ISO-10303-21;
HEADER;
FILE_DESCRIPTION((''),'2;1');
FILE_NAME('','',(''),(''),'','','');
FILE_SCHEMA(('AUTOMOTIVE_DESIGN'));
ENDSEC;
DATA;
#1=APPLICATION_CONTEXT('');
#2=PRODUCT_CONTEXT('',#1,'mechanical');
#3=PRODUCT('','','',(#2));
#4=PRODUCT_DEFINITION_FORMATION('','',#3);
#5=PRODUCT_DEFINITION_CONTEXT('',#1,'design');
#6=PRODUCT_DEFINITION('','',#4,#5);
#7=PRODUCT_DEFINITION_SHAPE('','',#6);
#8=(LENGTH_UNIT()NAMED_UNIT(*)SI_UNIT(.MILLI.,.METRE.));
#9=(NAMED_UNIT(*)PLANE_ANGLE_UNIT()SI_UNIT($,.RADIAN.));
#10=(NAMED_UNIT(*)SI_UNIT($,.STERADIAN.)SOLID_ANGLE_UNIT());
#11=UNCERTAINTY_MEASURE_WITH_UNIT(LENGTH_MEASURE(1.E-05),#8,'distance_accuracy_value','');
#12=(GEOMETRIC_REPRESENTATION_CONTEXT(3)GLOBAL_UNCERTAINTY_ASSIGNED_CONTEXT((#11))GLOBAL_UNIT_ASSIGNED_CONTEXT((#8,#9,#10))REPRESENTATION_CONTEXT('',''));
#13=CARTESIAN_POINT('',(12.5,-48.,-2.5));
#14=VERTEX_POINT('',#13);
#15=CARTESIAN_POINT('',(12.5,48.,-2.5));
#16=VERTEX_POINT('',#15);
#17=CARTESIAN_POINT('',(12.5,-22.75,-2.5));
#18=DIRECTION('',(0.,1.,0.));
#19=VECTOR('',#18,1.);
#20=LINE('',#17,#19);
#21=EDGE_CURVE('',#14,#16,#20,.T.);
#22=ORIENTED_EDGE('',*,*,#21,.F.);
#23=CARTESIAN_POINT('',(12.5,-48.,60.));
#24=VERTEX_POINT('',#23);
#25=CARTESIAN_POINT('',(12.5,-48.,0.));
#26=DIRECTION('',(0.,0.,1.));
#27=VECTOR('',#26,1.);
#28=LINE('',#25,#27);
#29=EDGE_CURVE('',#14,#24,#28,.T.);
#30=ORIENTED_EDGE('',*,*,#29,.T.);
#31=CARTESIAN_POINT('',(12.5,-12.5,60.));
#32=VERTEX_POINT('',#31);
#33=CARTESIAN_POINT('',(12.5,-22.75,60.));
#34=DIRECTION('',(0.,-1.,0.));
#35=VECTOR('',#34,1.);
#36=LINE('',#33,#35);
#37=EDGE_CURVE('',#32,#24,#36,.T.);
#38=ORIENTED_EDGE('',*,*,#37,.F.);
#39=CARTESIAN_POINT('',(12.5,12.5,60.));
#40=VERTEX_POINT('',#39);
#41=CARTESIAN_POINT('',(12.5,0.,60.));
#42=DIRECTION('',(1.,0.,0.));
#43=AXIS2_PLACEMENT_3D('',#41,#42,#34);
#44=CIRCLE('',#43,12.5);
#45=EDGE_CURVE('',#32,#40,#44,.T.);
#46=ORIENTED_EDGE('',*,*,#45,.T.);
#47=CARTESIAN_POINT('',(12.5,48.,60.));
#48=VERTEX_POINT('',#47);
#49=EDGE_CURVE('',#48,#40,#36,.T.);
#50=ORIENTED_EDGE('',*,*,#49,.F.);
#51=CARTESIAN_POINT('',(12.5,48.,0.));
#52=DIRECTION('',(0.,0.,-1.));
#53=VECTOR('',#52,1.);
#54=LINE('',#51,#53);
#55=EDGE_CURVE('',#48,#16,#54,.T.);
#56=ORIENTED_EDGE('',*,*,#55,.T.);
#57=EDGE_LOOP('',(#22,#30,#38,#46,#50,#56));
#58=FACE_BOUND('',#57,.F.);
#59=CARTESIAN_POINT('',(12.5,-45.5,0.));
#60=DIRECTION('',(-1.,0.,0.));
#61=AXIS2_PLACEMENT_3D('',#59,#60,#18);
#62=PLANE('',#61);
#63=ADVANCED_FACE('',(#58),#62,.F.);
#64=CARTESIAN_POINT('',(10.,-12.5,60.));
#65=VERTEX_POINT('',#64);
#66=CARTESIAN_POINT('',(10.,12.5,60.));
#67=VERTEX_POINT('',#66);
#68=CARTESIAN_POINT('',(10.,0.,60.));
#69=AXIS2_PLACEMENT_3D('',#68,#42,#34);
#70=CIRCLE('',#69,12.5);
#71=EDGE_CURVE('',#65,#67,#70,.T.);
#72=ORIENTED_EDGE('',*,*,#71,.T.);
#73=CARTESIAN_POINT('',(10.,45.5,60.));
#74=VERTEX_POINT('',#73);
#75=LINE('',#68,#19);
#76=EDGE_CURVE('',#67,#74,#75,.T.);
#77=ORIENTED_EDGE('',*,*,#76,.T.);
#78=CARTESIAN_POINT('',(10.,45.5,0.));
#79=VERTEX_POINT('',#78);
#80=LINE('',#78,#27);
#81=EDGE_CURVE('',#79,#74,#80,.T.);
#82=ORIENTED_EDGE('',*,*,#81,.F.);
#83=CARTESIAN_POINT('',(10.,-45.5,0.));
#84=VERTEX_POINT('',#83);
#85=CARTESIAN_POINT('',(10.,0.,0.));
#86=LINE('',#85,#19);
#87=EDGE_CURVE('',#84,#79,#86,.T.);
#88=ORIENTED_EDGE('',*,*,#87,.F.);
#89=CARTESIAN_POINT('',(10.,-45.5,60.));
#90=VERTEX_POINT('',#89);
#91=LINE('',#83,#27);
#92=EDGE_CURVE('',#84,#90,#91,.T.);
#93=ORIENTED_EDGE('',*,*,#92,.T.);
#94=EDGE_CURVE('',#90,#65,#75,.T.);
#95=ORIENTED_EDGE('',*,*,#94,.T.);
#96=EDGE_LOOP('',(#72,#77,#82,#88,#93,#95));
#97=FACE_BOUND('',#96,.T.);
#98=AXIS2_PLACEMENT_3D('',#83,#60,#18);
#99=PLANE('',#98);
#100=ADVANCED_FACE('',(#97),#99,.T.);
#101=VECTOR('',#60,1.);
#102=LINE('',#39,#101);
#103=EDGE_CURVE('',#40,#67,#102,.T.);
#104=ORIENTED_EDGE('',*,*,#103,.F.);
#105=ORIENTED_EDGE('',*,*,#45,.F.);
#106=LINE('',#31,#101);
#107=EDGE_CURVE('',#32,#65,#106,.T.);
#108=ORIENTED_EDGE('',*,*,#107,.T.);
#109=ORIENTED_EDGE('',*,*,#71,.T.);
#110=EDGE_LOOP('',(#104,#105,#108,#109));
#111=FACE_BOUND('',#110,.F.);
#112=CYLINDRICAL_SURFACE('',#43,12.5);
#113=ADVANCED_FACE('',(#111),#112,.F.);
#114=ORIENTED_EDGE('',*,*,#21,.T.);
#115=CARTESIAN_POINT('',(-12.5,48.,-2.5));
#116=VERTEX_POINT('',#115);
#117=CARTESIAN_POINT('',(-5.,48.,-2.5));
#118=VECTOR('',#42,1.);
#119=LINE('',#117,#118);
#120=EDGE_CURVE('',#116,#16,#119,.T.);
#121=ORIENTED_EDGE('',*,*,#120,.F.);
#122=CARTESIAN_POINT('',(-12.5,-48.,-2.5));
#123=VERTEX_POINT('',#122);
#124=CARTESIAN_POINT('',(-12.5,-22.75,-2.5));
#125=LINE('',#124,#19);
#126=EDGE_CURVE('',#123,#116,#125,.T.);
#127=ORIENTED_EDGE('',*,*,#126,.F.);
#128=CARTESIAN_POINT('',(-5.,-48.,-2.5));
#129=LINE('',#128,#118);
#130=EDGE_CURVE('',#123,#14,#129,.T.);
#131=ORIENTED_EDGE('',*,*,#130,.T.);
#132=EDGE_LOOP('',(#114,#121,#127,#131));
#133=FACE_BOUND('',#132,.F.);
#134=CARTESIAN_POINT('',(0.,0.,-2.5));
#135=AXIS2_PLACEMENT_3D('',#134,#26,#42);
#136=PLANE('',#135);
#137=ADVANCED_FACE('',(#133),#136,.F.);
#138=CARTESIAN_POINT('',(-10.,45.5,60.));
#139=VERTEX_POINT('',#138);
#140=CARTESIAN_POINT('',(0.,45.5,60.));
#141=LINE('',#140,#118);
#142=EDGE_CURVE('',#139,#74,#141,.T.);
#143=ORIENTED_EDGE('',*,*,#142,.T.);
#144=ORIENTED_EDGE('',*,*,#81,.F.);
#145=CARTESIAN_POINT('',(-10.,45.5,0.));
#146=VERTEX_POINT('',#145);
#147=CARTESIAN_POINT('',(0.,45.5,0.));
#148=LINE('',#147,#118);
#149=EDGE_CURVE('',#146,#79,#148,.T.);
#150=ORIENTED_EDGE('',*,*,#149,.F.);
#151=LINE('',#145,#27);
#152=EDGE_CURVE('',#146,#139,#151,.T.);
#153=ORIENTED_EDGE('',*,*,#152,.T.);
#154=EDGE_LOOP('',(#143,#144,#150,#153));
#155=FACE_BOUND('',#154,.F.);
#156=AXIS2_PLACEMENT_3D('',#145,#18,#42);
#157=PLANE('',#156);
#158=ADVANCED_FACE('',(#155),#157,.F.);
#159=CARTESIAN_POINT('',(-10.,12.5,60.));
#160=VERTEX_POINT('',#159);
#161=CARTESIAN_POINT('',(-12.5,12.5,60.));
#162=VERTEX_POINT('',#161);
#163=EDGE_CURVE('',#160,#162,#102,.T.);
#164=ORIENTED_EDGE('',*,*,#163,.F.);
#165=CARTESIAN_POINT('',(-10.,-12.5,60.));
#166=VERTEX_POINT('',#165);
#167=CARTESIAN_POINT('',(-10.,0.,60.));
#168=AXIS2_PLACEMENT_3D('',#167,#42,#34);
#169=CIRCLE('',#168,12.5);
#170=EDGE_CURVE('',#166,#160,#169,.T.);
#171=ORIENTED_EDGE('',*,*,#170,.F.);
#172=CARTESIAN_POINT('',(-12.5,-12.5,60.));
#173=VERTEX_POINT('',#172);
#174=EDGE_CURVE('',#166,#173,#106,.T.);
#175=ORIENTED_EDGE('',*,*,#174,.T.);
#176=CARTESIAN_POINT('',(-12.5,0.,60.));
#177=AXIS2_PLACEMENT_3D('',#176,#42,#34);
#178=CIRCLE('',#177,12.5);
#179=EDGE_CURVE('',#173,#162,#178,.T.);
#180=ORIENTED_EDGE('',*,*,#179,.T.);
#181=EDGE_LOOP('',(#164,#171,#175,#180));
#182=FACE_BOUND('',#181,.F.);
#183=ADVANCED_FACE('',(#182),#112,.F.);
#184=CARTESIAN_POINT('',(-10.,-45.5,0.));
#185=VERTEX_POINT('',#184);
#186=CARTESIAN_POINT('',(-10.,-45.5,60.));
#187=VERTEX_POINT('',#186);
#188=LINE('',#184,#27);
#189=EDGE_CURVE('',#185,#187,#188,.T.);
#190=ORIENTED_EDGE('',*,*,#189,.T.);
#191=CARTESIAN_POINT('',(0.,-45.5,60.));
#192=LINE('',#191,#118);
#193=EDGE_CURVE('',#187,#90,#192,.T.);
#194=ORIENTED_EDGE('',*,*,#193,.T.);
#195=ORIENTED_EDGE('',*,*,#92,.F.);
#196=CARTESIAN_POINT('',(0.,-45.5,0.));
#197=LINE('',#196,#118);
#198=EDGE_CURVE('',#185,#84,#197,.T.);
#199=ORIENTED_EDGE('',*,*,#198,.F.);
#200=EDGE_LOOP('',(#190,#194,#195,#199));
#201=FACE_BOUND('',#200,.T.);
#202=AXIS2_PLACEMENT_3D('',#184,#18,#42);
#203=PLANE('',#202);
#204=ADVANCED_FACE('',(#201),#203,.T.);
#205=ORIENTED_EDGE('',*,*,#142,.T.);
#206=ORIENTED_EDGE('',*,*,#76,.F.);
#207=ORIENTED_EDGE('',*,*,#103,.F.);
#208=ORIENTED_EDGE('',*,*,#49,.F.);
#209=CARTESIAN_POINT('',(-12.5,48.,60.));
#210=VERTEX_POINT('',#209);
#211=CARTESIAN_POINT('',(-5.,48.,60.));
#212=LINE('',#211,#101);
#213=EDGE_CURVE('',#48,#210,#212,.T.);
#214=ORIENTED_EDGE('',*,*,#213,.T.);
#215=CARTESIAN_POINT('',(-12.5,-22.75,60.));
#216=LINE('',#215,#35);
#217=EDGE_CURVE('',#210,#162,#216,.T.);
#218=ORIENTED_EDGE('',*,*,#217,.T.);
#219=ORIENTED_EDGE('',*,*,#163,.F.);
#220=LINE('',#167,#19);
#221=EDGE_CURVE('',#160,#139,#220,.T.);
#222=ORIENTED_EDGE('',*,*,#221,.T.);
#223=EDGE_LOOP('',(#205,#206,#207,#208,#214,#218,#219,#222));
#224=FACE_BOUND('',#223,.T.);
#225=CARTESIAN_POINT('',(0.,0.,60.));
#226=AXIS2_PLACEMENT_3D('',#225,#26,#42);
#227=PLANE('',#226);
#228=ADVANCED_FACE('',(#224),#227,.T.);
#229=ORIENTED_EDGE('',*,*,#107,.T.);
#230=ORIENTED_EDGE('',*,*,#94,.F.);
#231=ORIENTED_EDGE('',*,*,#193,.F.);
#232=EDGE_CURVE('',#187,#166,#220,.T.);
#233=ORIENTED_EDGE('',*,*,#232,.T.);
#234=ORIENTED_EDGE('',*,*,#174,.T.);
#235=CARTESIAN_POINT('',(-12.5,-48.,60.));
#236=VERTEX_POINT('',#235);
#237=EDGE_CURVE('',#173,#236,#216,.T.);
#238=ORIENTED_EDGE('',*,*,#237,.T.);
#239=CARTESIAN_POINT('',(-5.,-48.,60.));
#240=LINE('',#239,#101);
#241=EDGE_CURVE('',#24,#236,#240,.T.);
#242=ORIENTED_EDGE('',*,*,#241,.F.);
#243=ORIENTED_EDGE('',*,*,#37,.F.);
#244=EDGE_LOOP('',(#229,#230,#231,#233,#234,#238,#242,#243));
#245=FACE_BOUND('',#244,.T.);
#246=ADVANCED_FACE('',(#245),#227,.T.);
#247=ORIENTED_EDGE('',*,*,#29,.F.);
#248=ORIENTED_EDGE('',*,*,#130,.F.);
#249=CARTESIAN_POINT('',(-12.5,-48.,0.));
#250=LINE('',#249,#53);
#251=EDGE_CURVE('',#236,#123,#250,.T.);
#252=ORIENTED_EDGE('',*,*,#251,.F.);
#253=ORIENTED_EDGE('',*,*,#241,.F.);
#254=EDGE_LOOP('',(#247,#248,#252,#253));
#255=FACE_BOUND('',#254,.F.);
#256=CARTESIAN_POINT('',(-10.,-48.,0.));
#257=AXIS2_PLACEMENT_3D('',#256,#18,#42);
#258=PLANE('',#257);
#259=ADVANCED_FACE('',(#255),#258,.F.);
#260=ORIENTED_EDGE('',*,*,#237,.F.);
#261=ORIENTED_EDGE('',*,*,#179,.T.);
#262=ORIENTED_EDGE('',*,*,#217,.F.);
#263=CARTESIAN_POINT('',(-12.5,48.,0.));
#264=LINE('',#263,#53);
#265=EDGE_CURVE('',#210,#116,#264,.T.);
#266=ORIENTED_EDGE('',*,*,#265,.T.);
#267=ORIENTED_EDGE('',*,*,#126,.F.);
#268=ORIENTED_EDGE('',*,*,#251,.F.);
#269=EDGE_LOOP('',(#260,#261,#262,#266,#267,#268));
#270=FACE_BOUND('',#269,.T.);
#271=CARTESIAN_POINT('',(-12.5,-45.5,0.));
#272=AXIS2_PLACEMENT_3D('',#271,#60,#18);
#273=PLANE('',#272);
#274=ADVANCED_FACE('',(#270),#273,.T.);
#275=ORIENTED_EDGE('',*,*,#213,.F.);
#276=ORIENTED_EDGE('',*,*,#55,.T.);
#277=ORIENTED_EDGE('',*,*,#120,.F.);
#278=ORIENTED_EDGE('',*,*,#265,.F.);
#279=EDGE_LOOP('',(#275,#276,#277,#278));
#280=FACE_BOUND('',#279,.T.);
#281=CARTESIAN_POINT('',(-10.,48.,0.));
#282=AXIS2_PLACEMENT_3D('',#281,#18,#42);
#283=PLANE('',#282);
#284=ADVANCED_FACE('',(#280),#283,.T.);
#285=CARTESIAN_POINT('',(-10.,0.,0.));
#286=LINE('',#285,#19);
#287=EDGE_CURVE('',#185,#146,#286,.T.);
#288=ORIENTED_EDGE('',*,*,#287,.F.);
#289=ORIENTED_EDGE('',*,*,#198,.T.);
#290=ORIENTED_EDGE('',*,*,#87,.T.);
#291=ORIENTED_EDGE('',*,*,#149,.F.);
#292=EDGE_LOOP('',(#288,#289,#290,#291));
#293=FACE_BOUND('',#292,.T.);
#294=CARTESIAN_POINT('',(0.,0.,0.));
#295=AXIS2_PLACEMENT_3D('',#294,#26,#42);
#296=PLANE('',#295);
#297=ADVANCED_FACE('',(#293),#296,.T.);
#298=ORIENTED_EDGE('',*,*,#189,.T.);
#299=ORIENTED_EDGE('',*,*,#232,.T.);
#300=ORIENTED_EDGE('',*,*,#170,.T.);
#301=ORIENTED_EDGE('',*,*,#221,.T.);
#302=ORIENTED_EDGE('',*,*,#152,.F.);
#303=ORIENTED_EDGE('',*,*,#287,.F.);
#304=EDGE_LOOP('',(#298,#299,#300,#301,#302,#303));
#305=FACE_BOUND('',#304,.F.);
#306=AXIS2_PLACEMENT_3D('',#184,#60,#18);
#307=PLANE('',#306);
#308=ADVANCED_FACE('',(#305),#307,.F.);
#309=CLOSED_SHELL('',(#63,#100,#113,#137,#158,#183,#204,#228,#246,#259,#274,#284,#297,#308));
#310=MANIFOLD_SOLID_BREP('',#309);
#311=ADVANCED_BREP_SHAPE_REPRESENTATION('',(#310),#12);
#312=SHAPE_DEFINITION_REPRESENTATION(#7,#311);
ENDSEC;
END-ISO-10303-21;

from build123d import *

# Parameters (mm, degrees)
F0_W     = 20
F0_H     = 91
F1_DEPTH = 60
F2_T     = 2.5
F4_DEPTH = 25.001


with BuildPart() as f1:
    # F0 (on Top) → F1 (new body)
    with BuildSketch(Plane.XY):
        Rectangle(F0_W, F0_H)
    extrude(amount=F1_DEPTH)

    # F2
    f2_openings = [f1.faces().sort_by_distance(p)[0] for p in [
        (0, 0, 60),
    ]]
    offset(amount=F2_T, openings=f2_openings, kind=Kind.INTERSECTION)

    # F3 (on face) → F4 (cut, through all)
    with BuildSketch(Plane.YZ.offset(12.5)):
        with BuildLine():
            ThreePointArc((-12.5, 60), (0, 47.5), (12.5, 60))
            Line((12.5, 60), (-12.5, 60))
        make_face()
    extrude(amount=-F4_DEPTH, mode=Mode.SUBTRACT)


solid = f1.part
